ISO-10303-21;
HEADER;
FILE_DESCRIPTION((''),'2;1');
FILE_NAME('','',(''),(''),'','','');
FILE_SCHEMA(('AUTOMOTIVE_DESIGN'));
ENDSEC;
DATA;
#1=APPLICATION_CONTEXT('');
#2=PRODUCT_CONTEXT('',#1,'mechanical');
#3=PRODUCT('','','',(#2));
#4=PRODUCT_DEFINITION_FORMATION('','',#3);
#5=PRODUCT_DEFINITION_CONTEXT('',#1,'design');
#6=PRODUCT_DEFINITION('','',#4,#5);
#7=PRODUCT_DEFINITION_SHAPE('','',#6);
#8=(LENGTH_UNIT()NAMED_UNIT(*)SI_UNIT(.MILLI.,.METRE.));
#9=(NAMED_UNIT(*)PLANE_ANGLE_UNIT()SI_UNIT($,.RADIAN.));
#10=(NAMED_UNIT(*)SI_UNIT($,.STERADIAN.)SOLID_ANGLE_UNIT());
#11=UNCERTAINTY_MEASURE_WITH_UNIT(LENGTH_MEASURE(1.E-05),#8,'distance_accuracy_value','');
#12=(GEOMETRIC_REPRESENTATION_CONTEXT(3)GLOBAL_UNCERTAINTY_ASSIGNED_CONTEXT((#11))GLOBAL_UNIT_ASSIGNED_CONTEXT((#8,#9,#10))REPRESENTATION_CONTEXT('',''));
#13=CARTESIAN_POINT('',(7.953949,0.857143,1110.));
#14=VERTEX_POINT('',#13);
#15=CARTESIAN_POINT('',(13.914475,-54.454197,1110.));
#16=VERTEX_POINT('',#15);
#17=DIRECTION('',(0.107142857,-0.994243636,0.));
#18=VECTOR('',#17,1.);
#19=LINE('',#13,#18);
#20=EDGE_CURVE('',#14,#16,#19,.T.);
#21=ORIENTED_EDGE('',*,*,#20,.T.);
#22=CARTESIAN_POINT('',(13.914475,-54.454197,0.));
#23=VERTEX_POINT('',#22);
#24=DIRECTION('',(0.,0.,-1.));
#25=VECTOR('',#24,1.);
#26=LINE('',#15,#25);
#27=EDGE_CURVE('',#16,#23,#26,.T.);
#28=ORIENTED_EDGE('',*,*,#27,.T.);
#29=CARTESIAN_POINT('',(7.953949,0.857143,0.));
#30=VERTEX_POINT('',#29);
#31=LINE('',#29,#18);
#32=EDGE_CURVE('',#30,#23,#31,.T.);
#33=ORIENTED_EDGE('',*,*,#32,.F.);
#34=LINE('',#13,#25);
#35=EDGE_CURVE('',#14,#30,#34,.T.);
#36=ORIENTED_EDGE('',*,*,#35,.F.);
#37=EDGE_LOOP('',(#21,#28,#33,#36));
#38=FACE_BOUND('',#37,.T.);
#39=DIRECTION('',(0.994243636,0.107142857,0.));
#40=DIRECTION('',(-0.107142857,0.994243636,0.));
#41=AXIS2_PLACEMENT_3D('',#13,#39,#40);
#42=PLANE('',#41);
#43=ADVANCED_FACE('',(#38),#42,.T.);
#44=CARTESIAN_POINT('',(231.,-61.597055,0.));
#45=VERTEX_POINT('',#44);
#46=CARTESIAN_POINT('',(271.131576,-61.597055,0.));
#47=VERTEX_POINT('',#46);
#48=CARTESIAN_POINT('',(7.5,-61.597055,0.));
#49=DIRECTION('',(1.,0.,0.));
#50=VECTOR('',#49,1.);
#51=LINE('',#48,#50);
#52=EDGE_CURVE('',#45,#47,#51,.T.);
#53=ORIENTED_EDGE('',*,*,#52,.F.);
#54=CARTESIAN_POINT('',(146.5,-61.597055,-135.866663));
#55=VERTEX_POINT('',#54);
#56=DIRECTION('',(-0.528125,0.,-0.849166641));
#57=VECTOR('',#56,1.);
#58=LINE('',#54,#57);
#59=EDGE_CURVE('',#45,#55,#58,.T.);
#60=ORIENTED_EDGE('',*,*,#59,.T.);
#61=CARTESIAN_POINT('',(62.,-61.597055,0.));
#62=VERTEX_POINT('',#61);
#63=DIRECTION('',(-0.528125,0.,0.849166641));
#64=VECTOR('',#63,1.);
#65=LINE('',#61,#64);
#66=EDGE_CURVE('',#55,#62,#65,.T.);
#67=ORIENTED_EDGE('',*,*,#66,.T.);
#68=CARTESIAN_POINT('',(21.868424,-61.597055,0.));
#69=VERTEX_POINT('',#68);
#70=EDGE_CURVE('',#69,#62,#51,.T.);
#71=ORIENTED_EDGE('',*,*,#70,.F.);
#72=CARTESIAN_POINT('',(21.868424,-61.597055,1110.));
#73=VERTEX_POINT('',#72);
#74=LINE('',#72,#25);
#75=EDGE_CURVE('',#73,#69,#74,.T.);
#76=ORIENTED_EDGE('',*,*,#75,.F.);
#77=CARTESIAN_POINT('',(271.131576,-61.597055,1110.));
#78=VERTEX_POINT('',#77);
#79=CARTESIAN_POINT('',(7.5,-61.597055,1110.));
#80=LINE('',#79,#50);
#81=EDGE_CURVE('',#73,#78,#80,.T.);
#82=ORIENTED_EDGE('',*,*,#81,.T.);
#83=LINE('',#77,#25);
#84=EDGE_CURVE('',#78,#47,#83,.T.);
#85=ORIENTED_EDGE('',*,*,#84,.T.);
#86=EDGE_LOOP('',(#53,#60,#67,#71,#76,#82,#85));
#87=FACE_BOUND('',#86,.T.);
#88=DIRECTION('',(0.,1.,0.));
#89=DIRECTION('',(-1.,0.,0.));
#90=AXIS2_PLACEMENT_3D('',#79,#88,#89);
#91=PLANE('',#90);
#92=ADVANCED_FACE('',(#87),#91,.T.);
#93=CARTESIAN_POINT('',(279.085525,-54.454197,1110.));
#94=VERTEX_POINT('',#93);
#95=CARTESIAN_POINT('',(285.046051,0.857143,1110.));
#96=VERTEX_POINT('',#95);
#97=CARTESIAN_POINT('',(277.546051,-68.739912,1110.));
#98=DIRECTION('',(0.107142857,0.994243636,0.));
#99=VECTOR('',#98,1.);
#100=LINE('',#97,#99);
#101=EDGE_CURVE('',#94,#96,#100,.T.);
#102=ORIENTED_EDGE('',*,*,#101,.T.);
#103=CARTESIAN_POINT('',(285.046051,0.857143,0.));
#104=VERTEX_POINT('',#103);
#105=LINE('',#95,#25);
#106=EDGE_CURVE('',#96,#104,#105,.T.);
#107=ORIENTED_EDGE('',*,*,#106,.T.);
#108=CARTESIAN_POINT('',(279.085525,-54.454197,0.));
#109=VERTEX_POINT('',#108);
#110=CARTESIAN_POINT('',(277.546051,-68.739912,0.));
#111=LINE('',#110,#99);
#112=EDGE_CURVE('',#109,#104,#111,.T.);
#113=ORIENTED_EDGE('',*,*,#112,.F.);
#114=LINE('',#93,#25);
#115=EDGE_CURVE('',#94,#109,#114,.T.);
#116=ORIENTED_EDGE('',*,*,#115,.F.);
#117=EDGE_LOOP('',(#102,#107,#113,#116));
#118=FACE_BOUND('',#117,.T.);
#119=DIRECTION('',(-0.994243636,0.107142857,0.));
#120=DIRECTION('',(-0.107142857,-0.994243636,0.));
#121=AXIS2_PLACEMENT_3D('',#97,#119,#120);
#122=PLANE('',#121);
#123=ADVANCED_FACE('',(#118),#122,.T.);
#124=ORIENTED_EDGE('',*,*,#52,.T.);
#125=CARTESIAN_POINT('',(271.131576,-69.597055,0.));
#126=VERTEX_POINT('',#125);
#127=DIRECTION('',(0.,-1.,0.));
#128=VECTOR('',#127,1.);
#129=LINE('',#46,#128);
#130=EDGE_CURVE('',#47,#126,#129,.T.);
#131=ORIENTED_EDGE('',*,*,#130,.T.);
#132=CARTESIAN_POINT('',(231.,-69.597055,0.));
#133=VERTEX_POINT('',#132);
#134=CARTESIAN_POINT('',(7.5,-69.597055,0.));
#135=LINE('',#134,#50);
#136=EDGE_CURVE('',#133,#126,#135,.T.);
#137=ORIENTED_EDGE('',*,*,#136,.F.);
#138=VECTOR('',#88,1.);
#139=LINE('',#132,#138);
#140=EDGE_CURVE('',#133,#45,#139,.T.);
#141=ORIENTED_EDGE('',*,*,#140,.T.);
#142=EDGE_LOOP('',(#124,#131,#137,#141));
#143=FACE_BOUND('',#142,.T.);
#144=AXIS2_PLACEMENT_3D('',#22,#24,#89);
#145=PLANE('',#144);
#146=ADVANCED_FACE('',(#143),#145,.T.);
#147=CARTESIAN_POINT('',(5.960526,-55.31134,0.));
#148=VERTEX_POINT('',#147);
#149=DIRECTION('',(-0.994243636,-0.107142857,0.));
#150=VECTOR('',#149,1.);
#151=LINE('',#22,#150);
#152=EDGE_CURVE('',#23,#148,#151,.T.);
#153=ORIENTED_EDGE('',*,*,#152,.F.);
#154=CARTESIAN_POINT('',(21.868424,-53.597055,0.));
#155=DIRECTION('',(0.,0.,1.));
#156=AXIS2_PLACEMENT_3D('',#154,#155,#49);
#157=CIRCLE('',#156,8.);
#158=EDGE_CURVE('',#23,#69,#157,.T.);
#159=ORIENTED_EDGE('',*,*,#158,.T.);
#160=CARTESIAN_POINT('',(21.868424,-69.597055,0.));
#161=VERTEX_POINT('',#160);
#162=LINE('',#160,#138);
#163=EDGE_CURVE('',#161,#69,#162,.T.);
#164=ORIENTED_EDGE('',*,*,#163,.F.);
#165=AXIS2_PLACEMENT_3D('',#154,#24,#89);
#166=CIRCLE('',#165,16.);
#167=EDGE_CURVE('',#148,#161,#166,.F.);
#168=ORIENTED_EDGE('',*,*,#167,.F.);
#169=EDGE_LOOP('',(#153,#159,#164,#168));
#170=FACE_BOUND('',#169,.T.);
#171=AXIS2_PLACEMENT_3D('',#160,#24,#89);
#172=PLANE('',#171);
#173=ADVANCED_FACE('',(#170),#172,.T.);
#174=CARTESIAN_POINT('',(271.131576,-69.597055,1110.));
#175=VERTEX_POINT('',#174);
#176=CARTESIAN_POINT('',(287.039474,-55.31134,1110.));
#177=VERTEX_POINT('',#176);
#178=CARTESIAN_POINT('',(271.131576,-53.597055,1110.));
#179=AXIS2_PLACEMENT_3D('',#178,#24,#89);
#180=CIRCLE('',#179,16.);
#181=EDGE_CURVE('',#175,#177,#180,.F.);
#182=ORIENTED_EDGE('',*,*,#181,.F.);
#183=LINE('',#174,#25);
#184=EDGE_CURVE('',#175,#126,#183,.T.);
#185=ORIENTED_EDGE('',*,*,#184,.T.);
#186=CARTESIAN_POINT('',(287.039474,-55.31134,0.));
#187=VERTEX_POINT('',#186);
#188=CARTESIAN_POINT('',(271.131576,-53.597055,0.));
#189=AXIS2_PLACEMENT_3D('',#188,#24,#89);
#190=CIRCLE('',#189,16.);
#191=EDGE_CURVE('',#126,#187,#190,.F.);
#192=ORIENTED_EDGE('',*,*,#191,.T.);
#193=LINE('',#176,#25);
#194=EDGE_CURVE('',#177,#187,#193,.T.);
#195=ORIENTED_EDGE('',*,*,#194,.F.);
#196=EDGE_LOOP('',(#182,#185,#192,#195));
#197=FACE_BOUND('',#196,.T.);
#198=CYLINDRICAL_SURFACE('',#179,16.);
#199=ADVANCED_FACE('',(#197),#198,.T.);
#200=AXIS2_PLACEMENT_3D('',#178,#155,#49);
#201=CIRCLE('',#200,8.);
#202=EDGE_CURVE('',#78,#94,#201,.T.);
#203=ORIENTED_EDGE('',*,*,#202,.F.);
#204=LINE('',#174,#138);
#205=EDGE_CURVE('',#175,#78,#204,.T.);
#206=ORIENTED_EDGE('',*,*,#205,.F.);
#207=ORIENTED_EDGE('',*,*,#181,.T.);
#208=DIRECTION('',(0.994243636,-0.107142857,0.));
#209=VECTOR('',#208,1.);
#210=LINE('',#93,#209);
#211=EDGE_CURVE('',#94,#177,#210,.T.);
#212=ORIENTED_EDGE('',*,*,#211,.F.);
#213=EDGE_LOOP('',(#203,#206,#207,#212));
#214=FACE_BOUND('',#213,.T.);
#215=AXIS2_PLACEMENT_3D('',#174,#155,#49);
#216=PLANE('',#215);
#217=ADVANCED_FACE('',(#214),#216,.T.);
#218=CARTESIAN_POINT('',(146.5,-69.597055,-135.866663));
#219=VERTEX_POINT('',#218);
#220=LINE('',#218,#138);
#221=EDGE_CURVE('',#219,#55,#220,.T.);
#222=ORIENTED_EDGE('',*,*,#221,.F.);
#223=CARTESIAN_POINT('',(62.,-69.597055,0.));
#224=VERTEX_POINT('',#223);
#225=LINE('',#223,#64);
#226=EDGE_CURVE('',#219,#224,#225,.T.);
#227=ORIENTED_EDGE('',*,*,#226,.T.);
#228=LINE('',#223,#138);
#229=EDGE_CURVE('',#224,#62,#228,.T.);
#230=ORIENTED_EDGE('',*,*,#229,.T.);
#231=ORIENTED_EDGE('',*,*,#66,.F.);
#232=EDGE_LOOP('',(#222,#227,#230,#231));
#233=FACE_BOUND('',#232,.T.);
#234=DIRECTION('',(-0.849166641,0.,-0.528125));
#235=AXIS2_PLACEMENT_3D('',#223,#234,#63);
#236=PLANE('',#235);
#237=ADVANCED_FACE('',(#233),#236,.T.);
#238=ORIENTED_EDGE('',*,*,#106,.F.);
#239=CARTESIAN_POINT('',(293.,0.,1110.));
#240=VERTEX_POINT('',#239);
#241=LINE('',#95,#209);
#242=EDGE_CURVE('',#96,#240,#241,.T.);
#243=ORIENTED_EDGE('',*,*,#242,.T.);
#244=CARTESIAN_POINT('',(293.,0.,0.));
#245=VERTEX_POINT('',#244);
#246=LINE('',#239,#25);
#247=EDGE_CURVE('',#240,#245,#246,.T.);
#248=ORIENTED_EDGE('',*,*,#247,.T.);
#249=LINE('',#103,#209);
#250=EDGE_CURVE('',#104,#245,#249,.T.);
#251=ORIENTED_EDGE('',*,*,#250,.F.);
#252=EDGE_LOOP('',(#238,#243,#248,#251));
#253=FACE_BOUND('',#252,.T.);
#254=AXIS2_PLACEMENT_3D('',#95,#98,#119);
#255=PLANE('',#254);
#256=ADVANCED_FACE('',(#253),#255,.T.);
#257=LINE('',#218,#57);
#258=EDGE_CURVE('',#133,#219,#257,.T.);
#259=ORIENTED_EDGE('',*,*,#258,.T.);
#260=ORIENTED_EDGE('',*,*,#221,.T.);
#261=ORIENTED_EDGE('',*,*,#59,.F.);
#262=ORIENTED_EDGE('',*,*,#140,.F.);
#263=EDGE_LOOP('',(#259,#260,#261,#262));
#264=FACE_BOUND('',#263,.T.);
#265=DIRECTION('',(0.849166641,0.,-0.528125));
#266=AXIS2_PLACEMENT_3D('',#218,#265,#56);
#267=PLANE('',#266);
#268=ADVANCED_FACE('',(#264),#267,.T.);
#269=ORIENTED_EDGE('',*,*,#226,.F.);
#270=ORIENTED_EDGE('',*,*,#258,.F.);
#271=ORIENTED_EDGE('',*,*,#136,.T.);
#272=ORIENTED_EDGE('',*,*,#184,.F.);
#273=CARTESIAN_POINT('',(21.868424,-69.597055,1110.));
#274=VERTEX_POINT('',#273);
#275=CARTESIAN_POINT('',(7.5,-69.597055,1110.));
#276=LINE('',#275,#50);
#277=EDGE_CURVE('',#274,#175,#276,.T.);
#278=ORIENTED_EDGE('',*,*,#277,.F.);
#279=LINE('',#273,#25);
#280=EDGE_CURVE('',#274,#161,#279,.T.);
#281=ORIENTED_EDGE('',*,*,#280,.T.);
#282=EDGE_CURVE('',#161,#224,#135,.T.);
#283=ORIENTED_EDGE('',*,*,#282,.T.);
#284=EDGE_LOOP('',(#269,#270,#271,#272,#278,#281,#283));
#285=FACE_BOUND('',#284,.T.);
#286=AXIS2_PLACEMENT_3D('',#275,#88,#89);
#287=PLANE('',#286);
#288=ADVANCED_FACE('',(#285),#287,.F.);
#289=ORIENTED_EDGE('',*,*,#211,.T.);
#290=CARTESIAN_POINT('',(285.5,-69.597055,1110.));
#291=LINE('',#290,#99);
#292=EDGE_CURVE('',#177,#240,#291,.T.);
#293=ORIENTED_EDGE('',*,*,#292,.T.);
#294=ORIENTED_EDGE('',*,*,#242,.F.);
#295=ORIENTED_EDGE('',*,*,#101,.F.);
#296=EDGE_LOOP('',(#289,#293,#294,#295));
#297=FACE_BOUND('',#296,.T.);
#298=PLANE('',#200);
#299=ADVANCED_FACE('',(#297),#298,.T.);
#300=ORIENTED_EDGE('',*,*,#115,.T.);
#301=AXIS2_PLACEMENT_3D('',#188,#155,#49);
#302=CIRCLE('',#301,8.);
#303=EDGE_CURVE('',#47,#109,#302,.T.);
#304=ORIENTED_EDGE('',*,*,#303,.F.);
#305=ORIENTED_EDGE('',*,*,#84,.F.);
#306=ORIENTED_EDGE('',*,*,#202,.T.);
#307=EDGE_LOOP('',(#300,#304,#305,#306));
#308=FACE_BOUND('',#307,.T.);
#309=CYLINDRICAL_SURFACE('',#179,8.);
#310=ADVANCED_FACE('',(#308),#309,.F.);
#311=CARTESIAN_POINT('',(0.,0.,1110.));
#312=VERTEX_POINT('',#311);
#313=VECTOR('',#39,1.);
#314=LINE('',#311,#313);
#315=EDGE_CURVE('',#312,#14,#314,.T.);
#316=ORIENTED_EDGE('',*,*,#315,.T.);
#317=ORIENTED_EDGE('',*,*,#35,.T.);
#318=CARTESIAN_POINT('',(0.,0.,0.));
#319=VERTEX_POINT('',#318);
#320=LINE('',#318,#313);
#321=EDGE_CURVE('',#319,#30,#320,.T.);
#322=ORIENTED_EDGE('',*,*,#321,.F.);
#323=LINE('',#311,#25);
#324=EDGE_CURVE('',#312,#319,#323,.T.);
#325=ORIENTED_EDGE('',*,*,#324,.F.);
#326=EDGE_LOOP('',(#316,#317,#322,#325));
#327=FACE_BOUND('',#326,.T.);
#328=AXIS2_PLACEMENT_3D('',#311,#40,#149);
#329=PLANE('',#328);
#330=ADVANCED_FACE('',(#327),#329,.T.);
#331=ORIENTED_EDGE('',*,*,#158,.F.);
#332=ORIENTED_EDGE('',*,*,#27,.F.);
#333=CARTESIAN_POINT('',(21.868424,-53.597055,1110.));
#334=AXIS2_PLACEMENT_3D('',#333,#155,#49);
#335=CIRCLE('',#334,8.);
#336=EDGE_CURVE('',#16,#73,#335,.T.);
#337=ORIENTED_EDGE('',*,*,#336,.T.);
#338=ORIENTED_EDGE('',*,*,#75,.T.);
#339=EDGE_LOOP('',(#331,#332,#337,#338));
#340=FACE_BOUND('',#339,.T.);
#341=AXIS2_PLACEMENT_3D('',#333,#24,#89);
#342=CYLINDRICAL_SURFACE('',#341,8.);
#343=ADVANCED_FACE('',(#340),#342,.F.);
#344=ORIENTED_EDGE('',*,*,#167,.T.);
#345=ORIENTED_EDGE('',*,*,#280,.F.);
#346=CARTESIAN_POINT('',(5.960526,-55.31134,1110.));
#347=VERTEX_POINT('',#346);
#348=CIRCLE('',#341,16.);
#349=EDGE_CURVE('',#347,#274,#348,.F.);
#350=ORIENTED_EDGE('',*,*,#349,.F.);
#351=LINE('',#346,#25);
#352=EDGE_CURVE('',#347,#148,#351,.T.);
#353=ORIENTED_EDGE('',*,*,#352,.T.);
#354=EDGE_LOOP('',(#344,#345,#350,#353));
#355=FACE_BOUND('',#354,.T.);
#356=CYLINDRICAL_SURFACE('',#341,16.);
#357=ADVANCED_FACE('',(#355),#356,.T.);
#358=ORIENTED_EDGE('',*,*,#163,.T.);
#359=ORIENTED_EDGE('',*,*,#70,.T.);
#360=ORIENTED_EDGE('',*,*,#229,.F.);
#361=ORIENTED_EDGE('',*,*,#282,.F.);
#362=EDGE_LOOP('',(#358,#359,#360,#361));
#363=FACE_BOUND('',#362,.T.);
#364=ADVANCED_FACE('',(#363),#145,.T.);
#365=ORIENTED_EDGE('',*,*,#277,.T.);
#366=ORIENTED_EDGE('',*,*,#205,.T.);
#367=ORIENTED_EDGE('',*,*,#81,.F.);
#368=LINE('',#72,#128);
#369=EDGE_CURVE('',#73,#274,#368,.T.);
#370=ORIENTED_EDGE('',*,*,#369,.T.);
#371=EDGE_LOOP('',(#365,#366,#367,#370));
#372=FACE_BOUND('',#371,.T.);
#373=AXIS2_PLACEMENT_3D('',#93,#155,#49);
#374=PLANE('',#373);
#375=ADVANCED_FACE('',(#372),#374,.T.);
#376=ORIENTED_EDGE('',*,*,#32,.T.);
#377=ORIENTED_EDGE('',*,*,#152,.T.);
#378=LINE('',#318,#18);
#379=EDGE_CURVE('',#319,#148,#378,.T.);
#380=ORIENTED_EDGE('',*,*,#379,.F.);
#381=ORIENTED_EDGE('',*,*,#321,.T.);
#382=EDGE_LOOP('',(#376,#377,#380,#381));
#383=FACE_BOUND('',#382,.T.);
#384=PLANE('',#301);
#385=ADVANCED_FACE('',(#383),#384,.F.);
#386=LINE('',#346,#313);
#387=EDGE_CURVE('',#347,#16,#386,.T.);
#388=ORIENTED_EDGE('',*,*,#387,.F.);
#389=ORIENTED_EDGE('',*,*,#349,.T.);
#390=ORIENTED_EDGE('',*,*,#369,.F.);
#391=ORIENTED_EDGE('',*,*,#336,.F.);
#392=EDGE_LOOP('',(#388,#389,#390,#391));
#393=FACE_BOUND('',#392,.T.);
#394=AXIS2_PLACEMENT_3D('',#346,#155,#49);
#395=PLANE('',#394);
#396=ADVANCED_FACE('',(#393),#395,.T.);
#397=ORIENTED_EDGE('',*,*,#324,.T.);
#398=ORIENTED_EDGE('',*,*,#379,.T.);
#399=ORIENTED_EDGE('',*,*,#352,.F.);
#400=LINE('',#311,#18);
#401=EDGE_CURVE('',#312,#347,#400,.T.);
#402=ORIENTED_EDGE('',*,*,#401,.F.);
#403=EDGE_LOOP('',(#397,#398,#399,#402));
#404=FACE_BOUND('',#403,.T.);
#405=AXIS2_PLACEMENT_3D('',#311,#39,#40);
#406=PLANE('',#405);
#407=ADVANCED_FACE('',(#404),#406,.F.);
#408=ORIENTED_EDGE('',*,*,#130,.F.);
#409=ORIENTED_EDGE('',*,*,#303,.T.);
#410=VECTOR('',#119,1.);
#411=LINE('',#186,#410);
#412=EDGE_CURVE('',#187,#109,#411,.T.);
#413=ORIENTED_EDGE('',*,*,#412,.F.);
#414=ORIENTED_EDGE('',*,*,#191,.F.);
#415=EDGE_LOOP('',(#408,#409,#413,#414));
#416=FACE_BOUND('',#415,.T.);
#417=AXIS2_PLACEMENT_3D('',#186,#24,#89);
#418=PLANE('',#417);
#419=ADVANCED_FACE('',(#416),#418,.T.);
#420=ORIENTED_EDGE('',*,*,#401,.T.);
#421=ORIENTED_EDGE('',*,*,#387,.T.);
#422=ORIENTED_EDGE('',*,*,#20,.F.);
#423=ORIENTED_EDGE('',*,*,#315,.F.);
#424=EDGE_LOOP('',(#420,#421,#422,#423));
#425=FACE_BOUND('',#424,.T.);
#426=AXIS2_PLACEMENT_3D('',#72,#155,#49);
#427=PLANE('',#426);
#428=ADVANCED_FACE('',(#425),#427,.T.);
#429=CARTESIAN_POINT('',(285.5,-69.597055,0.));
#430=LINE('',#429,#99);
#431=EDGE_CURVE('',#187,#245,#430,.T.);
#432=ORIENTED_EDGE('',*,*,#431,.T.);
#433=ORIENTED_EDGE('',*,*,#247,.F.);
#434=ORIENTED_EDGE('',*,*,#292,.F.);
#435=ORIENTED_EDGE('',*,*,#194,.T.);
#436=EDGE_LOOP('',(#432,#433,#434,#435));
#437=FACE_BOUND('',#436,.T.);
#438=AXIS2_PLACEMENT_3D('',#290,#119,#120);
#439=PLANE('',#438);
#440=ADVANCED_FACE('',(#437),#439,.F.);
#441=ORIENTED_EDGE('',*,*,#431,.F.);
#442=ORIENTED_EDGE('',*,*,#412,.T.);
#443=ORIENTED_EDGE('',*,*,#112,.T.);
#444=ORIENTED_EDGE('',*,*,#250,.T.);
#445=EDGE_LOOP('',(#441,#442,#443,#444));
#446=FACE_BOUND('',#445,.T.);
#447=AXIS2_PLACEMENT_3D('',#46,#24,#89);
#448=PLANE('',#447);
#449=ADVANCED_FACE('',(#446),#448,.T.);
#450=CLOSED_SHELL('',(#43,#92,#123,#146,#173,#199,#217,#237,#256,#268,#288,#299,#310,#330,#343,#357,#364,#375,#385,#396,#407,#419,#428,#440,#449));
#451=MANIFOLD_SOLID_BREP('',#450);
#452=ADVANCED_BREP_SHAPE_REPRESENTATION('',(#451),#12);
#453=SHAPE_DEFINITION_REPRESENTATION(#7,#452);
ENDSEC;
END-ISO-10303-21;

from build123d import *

# Parameters (mm, degrees)
TABAN_FLAN_1_DEPTH = 1110
SEKME1_DEPTH       = 8


# Sheet-metal steps are written as plain solids
with BuildPart() as part:
    # Çizim1 → Taban-Flanş1 (new body)
    with BuildSketch(Plane.XY):
        with BuildLine():
            Line((0, 0), (5.960525983, -55.31134025))
            ThreePointArc((5.960525983, -55.31134025), (11.177974486, -65.501435482), (21.868424162, -69.597054535))
            Line((21.868424162, -69.597054535), (271.131575838, -69.597054535))
            ThreePointArc((271.131575838, -69.597054535), (281.822025514, -65.501435482), (287.039474017, -55.31134025))
            Line((287.039474017, -55.31134025), (293, 0))
            Line((293, 0), (285.04605091, 0.857142857))
            Line((285.04605091, 0.857142857), (279.085524928, -54.454197393))
            ThreePointArc((279.085524928, -54.454197393), (276.476800676, -59.549245009), (271.131575838, -61.597054535))
            Line((271.131575838, -61.597054535), (21.868424162, -61.597054535))
            ThreePointArc((21.868424162, -61.597054535), (16.523199324, -59.549245009), (13.914475072, -54.454197393))
            Line((13.914475072, -54.454197393), (7.95394909, 0.857142857))
            Line((7.95394909, 0.857142857), (0, 0))
        make_face()
    extrude(amount=TABAN_FLAN_1_DEPTH)

    # Çizim6 → Sekme1 (add)
    with BuildSketch(Plane(origin=(0, -61.597054535, 0), x_dir=(1, 0, 0), z_dir=(0, 1, 0))):
        Polygon((62, 0), (146.5, 135.866662578), (231, 0), align=None)
    extrude(amount=-SEKME1_DEPTH)


solid = part.part
